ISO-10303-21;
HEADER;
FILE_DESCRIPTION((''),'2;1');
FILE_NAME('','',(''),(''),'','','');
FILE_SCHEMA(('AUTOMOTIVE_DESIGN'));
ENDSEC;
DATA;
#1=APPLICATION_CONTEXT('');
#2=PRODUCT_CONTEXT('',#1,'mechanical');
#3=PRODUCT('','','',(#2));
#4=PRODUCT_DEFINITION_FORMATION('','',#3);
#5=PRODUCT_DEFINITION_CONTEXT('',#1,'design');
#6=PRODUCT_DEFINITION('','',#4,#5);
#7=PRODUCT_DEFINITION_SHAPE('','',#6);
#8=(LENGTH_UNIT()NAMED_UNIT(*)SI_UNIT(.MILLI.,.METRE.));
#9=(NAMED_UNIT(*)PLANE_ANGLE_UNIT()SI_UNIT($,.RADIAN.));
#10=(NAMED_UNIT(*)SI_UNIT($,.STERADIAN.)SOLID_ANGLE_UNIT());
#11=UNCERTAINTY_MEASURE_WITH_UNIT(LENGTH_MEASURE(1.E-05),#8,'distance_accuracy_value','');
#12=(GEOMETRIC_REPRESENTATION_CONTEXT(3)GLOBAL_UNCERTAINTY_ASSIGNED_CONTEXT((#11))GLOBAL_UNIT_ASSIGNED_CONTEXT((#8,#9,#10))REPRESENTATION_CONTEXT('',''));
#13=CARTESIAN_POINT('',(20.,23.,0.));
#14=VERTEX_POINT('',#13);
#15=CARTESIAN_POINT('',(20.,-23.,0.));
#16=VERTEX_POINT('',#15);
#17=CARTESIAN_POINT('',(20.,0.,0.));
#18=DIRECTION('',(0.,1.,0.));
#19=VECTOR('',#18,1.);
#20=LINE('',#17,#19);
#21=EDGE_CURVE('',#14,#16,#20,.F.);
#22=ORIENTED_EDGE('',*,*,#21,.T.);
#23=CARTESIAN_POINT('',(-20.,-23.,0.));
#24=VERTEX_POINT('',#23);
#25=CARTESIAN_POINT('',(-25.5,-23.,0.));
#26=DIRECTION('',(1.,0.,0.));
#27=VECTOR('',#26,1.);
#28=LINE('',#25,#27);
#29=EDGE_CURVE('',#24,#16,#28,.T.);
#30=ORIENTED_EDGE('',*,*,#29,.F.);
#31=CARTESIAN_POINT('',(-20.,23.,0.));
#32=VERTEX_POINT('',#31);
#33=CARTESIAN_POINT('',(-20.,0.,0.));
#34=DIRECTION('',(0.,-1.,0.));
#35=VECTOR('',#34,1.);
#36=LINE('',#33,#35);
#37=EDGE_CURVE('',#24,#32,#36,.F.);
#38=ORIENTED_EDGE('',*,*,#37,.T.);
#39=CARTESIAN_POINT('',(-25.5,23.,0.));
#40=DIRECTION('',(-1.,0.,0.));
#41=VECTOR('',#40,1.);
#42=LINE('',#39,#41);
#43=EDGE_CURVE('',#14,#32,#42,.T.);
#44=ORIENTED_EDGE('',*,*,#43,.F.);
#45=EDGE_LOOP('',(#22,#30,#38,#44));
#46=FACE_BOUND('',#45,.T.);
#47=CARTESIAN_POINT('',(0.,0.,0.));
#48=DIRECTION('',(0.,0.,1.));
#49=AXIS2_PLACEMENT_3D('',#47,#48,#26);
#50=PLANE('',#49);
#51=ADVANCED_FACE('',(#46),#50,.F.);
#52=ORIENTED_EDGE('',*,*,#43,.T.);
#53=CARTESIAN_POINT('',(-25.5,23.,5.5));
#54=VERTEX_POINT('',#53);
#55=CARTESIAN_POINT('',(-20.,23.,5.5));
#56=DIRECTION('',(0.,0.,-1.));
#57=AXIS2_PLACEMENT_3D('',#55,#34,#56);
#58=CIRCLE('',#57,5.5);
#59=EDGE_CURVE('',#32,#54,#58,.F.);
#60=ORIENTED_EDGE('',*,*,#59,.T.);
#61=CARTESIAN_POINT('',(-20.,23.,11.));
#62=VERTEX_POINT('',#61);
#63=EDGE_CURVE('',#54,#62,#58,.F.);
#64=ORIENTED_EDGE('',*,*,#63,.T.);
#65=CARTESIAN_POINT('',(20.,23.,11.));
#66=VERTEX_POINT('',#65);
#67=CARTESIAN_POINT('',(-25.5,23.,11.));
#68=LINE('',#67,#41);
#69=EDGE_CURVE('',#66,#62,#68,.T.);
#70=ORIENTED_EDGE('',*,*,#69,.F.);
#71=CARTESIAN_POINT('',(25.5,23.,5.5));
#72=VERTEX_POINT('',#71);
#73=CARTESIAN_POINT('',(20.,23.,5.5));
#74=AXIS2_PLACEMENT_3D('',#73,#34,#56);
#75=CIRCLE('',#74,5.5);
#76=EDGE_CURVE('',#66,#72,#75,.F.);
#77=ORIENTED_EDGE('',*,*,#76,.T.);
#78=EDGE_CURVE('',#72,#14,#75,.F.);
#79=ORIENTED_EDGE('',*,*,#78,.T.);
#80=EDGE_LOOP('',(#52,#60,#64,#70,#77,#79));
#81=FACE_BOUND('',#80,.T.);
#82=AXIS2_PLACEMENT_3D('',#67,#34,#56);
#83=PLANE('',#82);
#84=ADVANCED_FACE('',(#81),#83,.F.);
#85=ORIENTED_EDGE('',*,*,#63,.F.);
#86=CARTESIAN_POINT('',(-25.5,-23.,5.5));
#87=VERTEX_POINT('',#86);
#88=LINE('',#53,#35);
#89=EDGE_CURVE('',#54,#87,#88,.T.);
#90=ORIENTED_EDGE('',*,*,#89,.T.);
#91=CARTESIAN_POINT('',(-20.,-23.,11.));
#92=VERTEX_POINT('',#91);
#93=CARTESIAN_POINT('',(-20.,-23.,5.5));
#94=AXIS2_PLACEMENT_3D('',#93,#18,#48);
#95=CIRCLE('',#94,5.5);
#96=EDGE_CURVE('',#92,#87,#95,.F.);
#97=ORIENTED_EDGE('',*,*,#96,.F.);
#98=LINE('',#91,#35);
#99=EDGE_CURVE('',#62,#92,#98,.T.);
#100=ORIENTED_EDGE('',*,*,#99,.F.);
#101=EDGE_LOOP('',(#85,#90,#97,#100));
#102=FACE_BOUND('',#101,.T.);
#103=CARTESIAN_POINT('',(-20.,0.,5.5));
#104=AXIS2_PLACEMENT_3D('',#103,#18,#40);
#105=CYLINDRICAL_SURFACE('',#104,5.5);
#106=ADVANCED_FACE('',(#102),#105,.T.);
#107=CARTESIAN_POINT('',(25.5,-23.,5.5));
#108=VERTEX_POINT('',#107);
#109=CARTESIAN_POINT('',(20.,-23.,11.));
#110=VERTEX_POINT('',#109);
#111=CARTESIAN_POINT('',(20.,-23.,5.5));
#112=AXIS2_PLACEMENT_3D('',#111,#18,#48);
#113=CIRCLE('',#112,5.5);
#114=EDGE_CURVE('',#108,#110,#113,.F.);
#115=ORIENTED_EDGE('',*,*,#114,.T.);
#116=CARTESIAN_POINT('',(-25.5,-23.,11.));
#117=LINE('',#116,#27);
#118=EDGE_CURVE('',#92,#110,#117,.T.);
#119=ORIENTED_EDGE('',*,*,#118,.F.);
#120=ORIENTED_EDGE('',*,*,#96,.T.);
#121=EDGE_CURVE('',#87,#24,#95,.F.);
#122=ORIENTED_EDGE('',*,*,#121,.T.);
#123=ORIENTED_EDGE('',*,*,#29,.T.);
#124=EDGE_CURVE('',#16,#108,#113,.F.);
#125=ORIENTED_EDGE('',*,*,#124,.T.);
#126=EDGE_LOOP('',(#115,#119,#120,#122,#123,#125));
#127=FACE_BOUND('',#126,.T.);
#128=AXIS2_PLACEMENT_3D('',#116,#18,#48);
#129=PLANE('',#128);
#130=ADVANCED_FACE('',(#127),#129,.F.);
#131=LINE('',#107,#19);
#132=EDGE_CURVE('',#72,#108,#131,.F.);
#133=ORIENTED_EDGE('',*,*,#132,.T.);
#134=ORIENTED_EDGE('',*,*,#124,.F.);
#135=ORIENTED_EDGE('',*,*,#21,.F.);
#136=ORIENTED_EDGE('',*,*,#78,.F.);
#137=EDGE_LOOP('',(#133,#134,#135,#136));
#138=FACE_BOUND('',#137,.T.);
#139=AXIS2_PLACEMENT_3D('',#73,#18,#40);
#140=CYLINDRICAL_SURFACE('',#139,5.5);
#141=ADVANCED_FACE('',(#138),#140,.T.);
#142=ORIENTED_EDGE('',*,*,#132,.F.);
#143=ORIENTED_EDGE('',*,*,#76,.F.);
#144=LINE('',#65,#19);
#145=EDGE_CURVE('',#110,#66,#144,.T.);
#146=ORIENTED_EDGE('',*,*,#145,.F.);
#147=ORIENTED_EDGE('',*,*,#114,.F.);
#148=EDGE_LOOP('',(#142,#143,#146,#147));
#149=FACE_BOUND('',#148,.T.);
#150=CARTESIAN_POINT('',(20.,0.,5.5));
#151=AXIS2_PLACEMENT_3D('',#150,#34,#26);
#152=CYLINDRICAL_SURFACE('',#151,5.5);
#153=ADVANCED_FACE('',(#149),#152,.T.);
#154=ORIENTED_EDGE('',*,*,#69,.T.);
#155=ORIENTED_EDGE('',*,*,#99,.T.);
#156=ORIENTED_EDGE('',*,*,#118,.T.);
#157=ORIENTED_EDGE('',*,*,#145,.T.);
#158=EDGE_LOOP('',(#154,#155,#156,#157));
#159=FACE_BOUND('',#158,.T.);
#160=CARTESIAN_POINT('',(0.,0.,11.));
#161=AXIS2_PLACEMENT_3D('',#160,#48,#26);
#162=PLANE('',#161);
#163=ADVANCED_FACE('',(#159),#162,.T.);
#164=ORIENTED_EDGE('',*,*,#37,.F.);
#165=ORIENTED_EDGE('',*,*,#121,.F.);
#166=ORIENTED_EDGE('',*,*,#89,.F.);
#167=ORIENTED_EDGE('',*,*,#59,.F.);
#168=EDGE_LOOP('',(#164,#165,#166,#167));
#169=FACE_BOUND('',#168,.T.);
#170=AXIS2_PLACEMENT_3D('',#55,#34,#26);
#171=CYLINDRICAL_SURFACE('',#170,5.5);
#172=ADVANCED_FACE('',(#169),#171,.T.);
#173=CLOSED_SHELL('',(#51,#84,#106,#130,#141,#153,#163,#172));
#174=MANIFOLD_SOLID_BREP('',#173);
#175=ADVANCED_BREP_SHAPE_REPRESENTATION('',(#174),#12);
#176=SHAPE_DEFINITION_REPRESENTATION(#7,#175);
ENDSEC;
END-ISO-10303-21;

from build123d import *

# Parameters (mm, degrees)
SKETCH1_W           = 51
SKETCH1_H           = 46
BOSS_EXTRUDE1_DEPTH = 11
FILLET2_R           = 5.5
FILLET3_R           = 5.5


with BuildPart() as part:
    # Sketch1 → Boss-Extrude1 (new body)
    with BuildSketch(Plane.XY):
        Rectangle(SKETCH1_W, SKETCH1_H)
    extrude(amount=BOSS_EXTRUDE1_DEPTH)

    # Fillet2
    fillet2_edges = [part.edges().sort_by_distance(p)[0] for p in [
        (25.5, 0, 11),
    ]]
    fillet(fillet2_edges, radius=FILLET2_R)

    # Fillet3
    fillet3_edges = [part.edges().sort_by_distance(p)[0] for p in [
        (-25.5, 0, 11),
        (-25.5, 0, 0),
        (25.5, 0, 0),
    ]]
    fillet(fillet3_edges, radius=FILLET3_R - 0.0001)  # a hair under: the kernel refuses the full size


solid = part.part
